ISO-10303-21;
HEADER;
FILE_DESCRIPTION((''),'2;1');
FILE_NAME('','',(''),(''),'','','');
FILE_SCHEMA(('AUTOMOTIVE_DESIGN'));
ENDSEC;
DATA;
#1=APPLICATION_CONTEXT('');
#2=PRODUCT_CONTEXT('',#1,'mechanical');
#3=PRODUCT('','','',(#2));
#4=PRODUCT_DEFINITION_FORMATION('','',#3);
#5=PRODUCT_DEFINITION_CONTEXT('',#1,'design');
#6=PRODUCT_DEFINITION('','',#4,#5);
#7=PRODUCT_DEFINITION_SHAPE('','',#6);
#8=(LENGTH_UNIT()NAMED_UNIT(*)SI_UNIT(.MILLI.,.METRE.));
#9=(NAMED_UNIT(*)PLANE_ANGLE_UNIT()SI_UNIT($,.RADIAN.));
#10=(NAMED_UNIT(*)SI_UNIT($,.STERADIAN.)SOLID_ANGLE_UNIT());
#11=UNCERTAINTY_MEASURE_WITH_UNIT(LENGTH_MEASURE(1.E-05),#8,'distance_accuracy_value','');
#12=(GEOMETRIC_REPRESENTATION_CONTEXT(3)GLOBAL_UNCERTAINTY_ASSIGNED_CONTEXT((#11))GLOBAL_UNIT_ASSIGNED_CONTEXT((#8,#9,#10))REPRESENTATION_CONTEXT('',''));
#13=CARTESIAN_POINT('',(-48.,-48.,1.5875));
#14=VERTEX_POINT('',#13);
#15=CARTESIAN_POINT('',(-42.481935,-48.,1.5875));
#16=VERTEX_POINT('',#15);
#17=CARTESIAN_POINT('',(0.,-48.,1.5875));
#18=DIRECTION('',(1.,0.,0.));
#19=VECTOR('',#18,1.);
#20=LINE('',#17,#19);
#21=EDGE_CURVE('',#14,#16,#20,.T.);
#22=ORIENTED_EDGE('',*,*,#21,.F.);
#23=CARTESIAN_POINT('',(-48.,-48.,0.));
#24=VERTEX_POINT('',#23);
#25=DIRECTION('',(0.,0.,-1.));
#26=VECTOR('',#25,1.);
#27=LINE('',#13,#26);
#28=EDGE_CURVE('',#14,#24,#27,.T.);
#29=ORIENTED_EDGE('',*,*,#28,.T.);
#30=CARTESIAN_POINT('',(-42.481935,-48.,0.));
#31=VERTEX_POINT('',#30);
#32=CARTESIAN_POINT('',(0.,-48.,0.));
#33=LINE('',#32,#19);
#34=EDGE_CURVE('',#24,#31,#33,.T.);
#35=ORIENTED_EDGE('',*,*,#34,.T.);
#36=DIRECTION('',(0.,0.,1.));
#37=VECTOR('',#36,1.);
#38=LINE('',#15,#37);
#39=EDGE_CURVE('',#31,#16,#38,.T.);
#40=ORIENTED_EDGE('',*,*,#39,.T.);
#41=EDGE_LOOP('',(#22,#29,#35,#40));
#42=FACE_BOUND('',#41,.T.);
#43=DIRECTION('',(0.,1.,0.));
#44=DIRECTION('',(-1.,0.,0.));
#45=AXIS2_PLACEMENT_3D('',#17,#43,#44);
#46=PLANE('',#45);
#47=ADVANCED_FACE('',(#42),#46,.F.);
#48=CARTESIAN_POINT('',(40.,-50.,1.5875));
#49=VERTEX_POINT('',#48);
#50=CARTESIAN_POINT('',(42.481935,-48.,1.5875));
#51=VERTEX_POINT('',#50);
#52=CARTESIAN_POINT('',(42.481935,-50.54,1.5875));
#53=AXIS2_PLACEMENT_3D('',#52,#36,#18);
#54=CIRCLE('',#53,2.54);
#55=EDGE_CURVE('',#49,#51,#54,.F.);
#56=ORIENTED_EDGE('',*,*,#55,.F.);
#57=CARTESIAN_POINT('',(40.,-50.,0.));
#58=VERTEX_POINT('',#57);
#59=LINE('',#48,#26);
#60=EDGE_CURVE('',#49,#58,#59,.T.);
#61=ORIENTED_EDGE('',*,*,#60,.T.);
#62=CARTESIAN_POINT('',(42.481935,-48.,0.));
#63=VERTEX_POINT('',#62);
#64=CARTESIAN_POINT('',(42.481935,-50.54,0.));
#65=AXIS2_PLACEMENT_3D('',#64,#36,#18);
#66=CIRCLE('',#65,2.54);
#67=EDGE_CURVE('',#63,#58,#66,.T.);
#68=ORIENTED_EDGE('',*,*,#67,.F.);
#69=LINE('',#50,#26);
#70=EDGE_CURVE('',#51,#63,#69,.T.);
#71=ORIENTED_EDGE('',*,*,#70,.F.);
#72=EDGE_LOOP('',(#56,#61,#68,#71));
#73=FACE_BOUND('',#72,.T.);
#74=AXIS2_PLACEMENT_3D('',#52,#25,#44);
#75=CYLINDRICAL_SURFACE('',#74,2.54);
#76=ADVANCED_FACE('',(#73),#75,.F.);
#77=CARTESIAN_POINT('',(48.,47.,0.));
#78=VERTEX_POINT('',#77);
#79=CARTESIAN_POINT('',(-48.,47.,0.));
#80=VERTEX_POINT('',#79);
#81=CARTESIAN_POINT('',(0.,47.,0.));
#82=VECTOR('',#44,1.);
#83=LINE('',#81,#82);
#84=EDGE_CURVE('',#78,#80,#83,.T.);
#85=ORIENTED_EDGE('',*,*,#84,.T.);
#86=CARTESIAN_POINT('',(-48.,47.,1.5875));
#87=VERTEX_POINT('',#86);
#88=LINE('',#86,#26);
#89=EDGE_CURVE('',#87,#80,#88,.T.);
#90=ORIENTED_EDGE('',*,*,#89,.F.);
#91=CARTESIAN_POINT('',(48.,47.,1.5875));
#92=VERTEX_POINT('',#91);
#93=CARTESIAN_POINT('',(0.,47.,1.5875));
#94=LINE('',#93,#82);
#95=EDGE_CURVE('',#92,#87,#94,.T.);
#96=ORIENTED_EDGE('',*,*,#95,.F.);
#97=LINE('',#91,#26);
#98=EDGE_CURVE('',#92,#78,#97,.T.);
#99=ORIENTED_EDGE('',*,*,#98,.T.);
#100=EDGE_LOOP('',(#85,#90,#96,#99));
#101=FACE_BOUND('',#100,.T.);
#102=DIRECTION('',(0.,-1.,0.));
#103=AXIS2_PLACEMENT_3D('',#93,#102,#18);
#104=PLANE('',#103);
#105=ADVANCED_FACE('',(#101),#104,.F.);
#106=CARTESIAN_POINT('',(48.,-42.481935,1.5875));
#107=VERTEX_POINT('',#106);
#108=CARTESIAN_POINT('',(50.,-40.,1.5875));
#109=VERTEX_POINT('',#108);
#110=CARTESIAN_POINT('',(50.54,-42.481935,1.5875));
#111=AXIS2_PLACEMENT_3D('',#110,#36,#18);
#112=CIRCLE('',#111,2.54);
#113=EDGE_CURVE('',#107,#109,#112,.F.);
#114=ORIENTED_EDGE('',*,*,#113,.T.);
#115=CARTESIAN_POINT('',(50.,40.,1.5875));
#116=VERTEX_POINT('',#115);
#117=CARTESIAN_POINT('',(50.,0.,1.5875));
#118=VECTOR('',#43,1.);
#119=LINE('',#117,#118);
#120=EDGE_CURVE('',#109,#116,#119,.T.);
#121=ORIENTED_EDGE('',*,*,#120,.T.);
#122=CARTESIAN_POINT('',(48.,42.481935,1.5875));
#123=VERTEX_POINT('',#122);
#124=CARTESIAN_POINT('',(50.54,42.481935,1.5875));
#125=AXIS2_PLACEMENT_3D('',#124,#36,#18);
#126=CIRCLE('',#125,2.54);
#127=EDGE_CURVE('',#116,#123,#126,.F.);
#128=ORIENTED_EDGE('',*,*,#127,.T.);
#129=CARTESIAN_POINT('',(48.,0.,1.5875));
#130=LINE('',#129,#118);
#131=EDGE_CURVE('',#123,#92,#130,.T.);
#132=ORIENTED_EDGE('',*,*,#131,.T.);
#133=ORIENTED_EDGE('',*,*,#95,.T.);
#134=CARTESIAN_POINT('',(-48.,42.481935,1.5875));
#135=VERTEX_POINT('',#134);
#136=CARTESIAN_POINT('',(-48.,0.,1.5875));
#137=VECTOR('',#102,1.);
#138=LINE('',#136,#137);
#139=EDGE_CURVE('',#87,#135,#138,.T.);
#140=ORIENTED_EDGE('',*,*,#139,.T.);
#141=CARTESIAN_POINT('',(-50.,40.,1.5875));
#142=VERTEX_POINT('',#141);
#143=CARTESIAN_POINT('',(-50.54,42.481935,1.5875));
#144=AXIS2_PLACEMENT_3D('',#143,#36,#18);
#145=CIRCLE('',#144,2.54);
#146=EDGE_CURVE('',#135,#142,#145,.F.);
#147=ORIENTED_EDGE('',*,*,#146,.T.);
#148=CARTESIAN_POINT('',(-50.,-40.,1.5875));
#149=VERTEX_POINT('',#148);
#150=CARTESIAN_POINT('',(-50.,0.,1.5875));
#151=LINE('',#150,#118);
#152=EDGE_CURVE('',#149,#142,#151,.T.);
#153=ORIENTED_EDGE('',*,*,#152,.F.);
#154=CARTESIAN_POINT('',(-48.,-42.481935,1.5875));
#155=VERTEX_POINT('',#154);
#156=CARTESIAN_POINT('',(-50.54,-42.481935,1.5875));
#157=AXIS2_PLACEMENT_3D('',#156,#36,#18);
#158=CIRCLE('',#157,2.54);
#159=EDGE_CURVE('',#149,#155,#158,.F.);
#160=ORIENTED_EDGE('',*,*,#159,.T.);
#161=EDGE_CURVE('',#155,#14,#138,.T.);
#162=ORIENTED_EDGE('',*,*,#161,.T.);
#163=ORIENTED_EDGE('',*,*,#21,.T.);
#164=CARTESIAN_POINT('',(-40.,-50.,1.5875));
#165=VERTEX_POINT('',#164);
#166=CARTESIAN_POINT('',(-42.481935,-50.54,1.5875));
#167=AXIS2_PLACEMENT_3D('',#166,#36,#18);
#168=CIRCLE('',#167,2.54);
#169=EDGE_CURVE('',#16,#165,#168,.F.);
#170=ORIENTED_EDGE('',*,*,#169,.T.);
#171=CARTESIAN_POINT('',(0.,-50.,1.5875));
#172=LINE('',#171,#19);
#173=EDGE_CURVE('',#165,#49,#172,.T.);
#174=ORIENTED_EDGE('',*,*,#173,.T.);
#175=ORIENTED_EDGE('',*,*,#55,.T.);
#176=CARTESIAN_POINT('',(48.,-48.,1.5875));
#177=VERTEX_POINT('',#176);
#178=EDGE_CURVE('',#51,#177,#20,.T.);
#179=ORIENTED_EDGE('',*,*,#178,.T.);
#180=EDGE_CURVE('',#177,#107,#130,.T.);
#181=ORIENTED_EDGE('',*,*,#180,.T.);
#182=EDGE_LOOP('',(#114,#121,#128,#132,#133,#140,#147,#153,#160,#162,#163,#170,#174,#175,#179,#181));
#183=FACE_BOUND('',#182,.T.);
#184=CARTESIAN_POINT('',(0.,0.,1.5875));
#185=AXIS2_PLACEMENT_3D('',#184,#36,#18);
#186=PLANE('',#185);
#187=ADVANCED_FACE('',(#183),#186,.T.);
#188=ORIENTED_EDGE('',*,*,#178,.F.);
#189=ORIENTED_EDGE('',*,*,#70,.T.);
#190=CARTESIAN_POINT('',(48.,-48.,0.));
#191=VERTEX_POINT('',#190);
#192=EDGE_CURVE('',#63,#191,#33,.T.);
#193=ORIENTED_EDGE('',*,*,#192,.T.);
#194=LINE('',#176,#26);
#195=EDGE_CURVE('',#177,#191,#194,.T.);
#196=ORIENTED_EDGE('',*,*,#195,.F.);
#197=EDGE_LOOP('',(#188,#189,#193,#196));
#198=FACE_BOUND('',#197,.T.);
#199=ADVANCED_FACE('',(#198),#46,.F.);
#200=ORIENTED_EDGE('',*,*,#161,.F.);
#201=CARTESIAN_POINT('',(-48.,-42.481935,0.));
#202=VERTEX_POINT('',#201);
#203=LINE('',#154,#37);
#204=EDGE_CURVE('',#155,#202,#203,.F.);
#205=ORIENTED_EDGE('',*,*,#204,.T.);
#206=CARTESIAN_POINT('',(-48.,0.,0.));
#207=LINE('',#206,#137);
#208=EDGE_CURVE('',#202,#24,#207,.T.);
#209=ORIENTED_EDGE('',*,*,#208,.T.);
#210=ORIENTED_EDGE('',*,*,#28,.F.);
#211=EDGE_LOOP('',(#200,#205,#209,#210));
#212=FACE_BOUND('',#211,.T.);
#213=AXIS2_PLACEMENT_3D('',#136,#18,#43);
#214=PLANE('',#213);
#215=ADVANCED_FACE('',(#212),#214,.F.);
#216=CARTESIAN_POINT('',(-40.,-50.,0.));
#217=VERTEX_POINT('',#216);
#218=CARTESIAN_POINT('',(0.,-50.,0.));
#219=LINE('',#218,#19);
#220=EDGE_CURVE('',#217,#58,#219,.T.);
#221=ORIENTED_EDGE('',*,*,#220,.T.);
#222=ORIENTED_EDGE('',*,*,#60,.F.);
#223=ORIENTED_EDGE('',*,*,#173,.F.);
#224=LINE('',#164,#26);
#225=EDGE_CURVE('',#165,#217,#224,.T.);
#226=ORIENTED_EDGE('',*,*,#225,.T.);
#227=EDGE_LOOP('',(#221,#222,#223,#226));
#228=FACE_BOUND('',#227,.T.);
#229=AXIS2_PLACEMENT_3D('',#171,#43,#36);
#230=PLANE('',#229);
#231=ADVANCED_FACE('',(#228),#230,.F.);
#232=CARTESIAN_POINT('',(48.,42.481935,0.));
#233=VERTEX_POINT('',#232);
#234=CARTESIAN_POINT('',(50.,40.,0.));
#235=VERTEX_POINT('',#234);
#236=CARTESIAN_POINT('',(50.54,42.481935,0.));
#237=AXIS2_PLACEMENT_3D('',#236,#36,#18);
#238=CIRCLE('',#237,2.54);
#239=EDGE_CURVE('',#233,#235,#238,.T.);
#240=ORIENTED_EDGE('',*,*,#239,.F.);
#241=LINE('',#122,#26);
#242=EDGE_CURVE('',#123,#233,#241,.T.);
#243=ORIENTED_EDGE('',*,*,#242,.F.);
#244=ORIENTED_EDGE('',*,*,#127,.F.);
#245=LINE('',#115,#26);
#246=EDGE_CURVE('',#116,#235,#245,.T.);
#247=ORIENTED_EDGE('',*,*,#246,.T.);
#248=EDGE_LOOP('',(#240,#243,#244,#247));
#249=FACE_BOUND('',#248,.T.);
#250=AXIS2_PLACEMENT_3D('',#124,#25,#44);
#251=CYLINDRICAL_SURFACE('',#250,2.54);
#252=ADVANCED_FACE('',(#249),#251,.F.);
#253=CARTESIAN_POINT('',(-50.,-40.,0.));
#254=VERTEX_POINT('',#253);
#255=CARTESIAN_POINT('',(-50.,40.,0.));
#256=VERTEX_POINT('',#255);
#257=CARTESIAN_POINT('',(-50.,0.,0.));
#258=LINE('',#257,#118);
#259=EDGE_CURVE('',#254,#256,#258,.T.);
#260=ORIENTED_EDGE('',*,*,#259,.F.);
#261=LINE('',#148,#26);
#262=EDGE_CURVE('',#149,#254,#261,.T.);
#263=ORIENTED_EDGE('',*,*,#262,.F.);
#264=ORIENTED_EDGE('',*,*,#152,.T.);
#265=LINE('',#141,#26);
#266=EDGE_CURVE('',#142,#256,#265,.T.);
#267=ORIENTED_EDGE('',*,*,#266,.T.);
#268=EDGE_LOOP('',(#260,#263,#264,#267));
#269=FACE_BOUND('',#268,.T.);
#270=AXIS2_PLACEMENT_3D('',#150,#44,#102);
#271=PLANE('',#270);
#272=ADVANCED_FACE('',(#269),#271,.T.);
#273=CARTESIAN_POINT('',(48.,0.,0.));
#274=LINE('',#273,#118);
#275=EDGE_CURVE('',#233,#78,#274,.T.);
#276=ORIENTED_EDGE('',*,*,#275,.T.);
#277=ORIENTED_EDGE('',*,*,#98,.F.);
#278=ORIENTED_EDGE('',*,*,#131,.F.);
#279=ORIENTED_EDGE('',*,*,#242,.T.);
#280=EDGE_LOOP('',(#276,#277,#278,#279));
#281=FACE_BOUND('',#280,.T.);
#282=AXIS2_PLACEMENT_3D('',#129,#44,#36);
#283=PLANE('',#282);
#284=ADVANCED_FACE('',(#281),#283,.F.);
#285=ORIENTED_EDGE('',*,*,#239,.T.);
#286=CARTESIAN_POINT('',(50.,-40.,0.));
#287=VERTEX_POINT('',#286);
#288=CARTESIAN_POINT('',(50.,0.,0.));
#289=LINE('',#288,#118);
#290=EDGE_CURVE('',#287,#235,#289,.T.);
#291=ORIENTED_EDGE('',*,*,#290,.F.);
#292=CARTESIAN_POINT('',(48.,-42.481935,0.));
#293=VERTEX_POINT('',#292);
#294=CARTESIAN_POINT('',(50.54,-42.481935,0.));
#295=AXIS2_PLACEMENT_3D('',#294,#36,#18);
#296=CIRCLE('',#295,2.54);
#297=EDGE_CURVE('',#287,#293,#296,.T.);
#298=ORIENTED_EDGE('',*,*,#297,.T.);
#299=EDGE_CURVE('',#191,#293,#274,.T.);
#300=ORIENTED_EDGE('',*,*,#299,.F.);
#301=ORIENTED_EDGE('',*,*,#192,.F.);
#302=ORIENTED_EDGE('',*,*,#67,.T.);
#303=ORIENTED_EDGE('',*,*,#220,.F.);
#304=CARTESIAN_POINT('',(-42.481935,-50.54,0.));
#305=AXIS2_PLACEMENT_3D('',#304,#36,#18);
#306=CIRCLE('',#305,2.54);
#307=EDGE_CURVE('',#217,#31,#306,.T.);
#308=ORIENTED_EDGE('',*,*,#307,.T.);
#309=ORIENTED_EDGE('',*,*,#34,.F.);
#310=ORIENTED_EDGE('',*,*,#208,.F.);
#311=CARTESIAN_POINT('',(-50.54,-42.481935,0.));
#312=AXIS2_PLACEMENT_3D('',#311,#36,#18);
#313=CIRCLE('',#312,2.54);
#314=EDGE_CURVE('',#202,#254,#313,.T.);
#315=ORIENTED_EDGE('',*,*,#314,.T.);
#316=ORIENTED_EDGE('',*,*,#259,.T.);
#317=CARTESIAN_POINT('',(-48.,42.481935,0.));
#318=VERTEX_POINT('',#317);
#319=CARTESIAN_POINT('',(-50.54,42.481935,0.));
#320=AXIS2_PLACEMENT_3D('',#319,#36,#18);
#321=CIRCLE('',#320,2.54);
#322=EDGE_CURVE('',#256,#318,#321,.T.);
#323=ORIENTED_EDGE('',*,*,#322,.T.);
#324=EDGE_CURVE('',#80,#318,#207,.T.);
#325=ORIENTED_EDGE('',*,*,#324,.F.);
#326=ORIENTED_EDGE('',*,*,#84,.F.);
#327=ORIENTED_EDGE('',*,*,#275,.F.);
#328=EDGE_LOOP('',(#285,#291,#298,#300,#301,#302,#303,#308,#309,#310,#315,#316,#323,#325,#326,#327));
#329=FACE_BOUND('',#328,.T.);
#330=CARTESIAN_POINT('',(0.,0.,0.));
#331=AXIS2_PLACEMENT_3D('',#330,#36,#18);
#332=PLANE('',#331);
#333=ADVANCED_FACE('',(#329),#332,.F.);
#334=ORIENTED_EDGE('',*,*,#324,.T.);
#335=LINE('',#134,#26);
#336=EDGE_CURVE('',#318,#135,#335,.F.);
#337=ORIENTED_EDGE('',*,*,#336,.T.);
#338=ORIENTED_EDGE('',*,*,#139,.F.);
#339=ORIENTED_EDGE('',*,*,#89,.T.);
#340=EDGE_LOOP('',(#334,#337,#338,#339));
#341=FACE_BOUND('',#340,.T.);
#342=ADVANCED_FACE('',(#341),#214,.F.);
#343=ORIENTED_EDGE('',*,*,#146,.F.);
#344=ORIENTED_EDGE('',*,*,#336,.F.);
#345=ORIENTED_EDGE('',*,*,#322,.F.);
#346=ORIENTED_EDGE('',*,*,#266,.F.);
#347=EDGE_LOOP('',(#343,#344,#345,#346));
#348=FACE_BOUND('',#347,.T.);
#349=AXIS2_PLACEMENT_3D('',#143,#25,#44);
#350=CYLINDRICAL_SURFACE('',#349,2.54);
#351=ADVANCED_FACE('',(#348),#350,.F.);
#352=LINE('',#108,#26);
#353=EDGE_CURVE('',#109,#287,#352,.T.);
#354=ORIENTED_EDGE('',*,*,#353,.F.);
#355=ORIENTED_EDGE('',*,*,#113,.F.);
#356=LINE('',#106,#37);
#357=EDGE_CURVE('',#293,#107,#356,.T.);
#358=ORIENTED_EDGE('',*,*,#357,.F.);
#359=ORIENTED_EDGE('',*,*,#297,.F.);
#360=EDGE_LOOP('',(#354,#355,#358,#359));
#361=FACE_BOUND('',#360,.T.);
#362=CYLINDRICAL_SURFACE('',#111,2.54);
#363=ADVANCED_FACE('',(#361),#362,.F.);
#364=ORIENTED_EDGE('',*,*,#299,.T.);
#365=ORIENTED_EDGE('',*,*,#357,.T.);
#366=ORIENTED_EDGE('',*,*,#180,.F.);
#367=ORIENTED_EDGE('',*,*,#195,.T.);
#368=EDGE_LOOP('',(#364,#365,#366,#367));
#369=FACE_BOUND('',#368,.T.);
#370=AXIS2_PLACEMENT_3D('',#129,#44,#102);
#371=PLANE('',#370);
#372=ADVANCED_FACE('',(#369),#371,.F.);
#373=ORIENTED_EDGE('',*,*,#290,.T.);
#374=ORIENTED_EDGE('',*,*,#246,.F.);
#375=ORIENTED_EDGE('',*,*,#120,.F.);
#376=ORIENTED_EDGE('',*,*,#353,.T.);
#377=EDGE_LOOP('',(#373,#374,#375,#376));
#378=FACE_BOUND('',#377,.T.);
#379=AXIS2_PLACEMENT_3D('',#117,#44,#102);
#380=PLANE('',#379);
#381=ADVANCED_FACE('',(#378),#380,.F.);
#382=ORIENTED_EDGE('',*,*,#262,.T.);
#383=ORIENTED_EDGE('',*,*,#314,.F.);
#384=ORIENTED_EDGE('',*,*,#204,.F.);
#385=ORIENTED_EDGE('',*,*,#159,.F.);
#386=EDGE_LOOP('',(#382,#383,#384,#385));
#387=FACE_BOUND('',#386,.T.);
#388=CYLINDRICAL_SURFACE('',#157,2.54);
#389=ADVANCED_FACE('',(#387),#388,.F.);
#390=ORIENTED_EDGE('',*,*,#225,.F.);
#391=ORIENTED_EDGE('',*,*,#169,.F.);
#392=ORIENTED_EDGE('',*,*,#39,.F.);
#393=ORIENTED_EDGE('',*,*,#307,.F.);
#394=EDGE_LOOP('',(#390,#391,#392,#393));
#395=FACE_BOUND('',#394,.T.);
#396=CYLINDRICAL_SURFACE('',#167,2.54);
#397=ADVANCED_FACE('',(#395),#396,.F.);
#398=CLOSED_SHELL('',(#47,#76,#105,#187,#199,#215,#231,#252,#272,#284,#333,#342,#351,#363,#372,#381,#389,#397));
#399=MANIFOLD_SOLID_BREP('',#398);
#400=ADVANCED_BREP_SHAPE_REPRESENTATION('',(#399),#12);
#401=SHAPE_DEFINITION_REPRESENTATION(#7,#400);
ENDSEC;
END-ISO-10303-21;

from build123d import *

# Parameters (mm, degrees)
BOSS_EXTRUDE1_DEPTH = 1.5875
FILLET1_R           = 2.54


with BuildPart() as part:
    # Sketch1 → Boss-Extrude1 (new body)
    with BuildSketch(Plane.XY):
        Polygon((-40, -48), (-40, -50), (-37.864895224, -50), (40, -50), (40, -48), (48, -48), (48, -40), (50, -40), (50, 40), (48, 40), (48, 47), (-48, 47), (-48, 40), (-50, 40), (-50, -37.864895224), (-50, -40), (-48, -40), (-48, -48), align=None)
    extrude(amount=BOSS_EXTRUDE1_DEPTH)

    # Fillet1
    # the kernel refuses this fillet: 2.54 mm, written as the material it adds along each edge
    with BuildSketch(Plane(origin=(-48, -40, 0), x_dir=(0, -1, 0), z_dir=(0, 0, 1)), Plane(origin=(48, 40, 0), x_dir=(0, 1, 0), z_dir=(0, 0, 1))) as fillet1_piece_1:
        with BuildLine():
            CenterArc((2.481934729, -2.54), FILLET1_R, 90, 77.725329785)
            Line((0, -2), (-0.049638695, -1.9892))
            ThreePointArc((-0.049638695, -1.9892), (-0.0508, -1), (-0.0508, 0))
            Line((-0.0508, 0), (0, 0.0508))
            Line((0, 0.0508), (2.481934729, 0.0508))
            Line((2.481934729, 0.0508), (2.481934729, 0))
        make_face()
    extrude(amount=1.5875)
    with BuildSketch(Plane(origin=(-40, -48, 0), x_dir=(-3.737454790095179e-12, -1.0, 0), z_dir=(0, 0, 1)), Plane(origin=(48, -40, 0), x_dir=(1.0, -3.7339020764163554e-12, 0), z_dir=(0, 0, 1)), Plane(origin=(-48, 40, 0), x_dir=(-1.0, 3.790745495277064e-12, 0), z_dir=(0, 0, 1))) as fillet1_piece_2:
        with BuildLine():
            CenterArc((2.54, -2.481934729), FILLET1_R, 102.274670215, 77.725329785)
            Line((0, -2.481934729), (-0.0508, -2.481934729))
            Line((-0.0508, -2.481934729), (-0.0508, 0))
            Line((-0.0508, 0), (0, 0.0508))
            ThreePointArc((0, 0.0508), (1, 0.0508), (1.9892, 0.049638695))
            Line((1.9892, 0.049638695), (2, 0))
        make_face()
    extrude(amount=1.5875)
    with BuildSketch(Plane(origin=(40, -48, 0), x_dir=(3.808509063671012e-12, -1.0, 0), z_dir=(0, 0, 1))) as fillet1_piece_3:
        with BuildLine():
            CenterArc((2.54, 2.481934729), FILLET1_R, 180, 77.725329785)
            Line((0, 2.481934729), (-0.0508, 2.481934729))
            Line((-0.0508, 2.481934729), (-0.0508, 0))
            Line((-0.0508, 0), (0, -0.0508))
            ThreePointArc((0, -0.0508), (1, -0.0508), (1.9892, -0.049638695))
            Line((1.9892, -0.049638695), (2, 0))
        make_face()
    extrude(amount=1.5875)


solid = part.part
